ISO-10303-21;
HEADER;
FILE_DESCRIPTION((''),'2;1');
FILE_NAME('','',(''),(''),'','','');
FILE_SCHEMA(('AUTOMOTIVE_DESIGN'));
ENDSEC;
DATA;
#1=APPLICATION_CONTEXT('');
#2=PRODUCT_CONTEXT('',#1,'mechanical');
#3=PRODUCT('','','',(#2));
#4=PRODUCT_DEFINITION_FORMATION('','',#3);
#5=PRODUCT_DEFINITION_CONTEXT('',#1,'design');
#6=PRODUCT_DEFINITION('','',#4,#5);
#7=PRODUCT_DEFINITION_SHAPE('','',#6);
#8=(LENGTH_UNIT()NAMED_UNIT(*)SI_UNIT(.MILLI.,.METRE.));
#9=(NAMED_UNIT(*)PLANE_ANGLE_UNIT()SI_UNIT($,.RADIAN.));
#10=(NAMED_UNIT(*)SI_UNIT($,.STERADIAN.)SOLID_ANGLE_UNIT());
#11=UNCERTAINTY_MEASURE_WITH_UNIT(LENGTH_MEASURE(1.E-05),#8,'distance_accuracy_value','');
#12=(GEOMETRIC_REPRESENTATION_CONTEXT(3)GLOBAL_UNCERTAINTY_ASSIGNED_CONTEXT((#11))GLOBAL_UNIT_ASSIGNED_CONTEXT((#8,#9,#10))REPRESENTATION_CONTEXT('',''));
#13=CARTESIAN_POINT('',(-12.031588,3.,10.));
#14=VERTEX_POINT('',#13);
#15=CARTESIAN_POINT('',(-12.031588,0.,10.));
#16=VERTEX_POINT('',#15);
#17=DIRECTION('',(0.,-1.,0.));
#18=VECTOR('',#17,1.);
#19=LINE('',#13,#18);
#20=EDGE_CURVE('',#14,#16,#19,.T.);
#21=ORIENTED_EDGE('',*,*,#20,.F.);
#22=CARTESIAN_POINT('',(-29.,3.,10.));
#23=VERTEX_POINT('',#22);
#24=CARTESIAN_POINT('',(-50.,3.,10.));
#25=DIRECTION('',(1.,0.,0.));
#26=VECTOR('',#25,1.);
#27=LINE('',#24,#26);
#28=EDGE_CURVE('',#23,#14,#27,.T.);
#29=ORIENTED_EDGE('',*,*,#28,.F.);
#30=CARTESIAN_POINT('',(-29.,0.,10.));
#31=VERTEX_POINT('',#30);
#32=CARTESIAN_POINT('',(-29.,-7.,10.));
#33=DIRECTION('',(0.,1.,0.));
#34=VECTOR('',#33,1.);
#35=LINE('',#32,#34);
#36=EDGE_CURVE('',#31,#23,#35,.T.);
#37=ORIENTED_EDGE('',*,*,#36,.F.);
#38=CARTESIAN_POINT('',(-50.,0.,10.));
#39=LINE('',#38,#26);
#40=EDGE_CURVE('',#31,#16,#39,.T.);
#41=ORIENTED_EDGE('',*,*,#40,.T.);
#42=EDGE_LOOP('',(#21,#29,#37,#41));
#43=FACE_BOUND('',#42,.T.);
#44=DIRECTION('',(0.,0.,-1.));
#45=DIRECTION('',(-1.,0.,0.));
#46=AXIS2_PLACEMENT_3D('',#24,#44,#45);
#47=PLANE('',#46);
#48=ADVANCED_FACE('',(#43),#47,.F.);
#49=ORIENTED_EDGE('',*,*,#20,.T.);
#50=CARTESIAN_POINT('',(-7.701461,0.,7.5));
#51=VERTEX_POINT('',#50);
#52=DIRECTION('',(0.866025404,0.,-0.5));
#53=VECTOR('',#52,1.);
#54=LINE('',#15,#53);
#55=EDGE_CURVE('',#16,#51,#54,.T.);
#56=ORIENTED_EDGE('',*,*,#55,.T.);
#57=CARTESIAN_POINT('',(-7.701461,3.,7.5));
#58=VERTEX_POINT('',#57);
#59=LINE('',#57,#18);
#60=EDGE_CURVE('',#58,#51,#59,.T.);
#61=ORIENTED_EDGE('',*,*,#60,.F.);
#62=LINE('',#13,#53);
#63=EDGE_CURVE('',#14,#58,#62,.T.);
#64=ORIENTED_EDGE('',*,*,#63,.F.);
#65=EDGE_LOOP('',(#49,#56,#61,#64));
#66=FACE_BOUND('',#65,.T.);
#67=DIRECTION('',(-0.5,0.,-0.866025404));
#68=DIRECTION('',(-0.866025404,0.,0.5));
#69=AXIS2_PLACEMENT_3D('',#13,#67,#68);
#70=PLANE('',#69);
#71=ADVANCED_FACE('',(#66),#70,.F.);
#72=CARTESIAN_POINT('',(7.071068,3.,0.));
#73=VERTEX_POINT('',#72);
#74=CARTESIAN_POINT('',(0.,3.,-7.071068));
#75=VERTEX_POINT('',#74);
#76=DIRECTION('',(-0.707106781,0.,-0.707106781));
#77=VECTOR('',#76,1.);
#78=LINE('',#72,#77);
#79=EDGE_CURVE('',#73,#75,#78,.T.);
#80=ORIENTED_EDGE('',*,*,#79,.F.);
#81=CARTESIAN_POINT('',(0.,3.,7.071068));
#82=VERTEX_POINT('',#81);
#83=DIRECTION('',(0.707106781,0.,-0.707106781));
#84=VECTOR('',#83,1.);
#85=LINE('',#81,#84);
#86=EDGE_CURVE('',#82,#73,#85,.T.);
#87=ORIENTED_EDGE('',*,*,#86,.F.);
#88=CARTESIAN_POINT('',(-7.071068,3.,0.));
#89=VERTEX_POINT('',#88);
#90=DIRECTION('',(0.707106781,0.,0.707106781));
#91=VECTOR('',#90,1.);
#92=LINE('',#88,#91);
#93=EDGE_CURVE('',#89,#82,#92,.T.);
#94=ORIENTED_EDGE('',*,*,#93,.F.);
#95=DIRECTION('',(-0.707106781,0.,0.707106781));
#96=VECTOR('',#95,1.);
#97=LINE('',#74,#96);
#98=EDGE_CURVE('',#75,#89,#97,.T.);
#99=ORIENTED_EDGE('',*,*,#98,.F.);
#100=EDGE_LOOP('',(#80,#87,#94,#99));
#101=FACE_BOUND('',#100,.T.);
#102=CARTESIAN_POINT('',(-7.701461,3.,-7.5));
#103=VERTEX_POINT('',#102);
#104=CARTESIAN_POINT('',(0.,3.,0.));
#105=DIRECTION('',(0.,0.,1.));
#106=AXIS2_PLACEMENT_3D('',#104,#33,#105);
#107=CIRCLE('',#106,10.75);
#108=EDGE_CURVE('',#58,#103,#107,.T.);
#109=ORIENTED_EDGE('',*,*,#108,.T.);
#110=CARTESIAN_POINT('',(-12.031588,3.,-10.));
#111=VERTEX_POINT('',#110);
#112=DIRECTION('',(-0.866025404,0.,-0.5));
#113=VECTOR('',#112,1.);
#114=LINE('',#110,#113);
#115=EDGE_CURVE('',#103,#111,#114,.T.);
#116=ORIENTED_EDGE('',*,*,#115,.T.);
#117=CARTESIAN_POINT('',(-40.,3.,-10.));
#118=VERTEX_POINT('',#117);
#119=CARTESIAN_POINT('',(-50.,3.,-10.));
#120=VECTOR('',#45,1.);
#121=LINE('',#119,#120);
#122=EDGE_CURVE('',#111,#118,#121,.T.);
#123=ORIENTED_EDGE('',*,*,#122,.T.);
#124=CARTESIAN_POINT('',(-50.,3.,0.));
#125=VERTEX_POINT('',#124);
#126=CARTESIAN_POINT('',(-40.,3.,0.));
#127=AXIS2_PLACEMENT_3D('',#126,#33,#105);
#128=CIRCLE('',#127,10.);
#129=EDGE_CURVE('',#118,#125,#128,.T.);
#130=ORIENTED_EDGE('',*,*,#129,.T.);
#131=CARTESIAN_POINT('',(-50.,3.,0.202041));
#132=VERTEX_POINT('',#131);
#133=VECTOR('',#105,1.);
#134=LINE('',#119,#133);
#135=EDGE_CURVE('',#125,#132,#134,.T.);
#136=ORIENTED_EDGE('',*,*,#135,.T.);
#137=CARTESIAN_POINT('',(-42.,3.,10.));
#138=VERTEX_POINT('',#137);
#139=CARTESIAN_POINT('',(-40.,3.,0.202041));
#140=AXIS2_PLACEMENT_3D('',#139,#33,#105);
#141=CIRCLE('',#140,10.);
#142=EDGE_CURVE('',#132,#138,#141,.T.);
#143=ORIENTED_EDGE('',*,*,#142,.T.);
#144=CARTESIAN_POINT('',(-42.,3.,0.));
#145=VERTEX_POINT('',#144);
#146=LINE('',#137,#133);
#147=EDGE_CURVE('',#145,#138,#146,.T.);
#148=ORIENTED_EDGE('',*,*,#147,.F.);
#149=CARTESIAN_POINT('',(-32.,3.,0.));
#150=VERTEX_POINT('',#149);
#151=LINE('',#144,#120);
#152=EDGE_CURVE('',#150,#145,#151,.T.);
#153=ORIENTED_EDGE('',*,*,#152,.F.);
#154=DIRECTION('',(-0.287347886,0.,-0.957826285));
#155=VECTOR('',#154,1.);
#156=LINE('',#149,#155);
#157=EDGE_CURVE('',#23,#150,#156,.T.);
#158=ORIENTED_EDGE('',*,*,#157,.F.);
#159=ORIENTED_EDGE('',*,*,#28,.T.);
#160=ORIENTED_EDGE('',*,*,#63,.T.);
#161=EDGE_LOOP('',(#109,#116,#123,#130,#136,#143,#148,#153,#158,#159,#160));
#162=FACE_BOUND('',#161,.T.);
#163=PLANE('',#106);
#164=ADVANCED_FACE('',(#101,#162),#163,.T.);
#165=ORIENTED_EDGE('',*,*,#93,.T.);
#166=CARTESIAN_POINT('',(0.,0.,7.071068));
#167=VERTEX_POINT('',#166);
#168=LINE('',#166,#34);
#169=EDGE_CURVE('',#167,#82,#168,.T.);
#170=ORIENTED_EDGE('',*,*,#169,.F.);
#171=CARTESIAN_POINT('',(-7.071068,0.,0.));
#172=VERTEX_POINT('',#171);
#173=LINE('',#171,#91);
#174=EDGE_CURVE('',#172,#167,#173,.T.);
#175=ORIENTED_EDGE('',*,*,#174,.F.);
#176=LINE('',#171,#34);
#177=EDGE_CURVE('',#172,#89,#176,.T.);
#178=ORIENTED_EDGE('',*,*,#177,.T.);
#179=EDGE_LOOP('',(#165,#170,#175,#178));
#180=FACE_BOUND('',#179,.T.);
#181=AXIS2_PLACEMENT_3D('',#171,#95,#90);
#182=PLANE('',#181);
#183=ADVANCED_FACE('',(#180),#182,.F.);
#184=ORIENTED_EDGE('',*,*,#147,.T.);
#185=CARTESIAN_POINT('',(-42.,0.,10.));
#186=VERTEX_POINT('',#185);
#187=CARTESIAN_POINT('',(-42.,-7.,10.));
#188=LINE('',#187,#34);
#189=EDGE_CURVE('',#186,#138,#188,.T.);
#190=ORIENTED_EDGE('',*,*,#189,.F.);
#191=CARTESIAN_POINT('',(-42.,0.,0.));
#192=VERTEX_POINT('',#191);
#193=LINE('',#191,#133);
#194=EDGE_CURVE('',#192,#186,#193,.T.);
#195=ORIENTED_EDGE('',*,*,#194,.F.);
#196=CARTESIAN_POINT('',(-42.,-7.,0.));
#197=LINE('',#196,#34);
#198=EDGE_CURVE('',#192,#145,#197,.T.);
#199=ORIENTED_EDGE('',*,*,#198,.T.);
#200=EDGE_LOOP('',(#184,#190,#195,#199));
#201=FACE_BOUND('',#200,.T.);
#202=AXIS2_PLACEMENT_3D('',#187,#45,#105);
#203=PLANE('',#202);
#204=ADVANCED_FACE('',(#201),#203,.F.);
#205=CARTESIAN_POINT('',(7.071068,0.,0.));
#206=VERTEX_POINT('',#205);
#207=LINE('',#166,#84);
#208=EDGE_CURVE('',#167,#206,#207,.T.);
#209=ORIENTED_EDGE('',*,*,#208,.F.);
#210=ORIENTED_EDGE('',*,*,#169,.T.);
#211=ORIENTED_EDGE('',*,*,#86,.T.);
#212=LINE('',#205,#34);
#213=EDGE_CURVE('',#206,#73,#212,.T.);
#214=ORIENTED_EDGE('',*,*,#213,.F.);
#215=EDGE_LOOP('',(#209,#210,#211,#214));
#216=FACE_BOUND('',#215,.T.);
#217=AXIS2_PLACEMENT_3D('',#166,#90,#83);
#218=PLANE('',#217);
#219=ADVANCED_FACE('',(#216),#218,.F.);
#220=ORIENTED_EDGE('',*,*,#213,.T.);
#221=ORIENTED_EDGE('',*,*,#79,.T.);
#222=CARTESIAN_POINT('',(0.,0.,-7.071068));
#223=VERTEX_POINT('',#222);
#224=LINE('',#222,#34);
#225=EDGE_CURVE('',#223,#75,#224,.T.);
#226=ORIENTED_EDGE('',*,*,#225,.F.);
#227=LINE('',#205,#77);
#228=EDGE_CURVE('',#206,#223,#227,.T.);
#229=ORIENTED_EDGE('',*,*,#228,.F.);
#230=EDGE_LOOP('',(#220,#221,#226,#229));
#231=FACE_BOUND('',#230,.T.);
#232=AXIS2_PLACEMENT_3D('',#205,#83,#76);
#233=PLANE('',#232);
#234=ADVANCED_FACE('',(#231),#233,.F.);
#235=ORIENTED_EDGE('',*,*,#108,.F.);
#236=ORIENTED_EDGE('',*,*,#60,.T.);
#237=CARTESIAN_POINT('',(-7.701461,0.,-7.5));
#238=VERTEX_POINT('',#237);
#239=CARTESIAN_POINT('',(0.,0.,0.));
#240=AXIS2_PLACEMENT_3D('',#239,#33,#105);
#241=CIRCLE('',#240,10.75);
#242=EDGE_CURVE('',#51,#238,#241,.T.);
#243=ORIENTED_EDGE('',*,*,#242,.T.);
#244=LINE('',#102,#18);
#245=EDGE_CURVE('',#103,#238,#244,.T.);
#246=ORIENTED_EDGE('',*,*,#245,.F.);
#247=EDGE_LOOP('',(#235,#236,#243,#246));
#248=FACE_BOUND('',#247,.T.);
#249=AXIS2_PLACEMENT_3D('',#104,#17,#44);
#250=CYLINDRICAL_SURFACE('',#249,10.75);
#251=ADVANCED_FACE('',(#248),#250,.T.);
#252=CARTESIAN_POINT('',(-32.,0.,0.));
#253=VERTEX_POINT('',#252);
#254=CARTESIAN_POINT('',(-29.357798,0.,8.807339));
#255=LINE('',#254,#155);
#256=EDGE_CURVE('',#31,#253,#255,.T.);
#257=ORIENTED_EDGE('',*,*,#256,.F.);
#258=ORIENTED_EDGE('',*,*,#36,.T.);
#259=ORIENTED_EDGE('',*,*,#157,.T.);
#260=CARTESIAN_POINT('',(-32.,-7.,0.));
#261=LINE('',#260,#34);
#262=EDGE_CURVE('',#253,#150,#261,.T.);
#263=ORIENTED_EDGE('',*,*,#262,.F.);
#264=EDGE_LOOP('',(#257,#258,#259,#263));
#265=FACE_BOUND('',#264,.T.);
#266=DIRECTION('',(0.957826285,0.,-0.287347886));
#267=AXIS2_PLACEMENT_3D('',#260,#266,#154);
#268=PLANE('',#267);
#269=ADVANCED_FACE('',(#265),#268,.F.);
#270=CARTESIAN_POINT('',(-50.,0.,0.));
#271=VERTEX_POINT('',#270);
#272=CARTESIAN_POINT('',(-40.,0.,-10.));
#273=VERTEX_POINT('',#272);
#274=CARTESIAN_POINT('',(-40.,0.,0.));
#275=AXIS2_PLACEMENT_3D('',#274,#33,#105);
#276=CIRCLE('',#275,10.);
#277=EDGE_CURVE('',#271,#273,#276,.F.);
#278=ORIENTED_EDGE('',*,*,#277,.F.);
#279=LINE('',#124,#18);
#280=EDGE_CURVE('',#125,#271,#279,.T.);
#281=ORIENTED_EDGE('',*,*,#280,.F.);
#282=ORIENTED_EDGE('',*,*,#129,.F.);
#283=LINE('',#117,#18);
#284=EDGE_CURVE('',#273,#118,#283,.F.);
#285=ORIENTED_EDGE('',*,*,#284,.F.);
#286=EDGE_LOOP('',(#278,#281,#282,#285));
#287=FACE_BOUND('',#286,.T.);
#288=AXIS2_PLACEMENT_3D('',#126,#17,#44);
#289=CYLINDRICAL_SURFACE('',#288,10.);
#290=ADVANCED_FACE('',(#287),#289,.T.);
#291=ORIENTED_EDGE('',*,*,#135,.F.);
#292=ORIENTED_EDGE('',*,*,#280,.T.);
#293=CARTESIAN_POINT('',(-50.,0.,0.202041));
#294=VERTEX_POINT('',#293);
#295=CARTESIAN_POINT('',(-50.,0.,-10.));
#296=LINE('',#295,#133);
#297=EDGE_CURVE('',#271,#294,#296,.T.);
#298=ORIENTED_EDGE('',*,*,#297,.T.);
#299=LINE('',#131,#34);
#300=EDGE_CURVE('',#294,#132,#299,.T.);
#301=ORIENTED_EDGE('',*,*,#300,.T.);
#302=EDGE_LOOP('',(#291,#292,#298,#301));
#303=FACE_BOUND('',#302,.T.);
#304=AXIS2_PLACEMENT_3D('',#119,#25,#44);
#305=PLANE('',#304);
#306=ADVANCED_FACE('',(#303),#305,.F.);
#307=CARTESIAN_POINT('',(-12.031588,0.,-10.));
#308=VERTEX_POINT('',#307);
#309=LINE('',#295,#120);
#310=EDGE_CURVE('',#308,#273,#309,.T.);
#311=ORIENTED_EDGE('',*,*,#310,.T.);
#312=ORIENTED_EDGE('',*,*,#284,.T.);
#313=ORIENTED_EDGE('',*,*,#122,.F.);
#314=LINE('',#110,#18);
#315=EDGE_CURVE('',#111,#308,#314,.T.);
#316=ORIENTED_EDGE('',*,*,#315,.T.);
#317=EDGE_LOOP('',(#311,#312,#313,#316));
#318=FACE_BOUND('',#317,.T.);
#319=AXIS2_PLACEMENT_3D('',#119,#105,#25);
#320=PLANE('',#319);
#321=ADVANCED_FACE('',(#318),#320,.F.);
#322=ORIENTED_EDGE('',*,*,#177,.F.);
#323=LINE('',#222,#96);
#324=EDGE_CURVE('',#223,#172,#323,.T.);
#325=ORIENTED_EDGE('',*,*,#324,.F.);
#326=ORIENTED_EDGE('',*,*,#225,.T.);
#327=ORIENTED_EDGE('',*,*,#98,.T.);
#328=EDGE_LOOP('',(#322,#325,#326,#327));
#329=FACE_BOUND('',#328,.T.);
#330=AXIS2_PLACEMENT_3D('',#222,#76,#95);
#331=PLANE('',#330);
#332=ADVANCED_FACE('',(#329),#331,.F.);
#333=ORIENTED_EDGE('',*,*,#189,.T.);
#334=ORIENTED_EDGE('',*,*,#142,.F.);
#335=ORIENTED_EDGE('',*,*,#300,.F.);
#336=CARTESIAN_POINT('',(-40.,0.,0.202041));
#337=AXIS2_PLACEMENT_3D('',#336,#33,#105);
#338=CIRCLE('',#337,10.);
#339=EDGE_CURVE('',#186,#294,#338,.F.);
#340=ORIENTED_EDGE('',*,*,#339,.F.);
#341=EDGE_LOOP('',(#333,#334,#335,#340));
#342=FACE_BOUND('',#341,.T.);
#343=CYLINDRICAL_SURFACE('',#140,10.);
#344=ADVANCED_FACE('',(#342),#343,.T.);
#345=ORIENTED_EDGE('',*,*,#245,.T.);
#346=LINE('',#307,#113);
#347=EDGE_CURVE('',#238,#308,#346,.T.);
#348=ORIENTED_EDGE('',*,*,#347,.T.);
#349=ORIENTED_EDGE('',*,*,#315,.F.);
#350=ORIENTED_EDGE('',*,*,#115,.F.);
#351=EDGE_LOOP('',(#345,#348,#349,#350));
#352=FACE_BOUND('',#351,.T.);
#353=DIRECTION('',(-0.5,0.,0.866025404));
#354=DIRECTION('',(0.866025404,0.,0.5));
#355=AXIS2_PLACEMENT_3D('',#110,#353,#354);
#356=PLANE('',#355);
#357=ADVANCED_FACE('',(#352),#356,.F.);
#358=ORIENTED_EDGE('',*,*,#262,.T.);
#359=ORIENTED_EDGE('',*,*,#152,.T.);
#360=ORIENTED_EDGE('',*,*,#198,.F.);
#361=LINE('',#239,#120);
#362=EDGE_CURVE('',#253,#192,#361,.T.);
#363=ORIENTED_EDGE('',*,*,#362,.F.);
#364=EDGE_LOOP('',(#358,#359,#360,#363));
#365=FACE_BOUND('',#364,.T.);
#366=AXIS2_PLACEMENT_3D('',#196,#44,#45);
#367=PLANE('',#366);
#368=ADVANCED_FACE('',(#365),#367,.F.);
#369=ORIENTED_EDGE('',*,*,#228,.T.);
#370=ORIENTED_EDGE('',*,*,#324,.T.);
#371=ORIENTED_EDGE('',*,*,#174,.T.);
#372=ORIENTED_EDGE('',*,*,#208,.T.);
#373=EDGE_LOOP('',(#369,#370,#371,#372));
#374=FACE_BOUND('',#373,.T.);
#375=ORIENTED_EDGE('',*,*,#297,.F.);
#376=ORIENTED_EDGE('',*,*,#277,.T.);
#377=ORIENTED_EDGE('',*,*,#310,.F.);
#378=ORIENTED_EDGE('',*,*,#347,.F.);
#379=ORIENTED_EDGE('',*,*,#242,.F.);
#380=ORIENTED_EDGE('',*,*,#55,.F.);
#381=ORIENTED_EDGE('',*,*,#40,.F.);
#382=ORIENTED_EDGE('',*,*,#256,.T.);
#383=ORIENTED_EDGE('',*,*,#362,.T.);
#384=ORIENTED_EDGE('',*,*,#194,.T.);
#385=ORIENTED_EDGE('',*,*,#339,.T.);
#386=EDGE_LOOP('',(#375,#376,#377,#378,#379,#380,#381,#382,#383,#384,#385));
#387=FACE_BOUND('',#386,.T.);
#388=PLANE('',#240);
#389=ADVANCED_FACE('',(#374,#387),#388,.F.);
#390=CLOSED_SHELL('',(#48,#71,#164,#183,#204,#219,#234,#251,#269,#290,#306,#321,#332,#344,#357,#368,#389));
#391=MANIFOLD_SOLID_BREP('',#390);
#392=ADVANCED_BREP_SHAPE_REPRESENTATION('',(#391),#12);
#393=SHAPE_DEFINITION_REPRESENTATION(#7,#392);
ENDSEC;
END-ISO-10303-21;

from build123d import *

# Parameters (mm, degrees)
EXTRUDE_1_DEPTH     = 3
CUT_EXTRUDE_1_DEPTH = 52.230484089
CUT_EXTRUDE_3_DEPTH = 10
FILLET_1_R          = 10


with BuildPart() as part:
    # 草图2 → 凸台-拉伸1 (new body)
    with BuildSketch(Plane(origin=(0, 0, 0), x_dir=(1, 0, 0), z_dir=(0, 1, 0))):
        with BuildLine():
            Line((-12.031587919, -10), (-7.7014609, -7.5))
            ThreePointArc((-7.7014609, -7.5), (10.75, 0), (-7.7014609, 7.5))
            Line((-7.7014609, 7.5), (-12.031587919, 10))
            Line((-12.031587919, 10), (-50, 10))
            Line((-50, 10), (-50, -10))
            Line((-50, -10), (-12.031587919, -10))
        make_face()
    extrude(amount=EXTRUDE_1_DEPTH)

    # 草图3 → 切除-拉伸1 (cut, through all)
    with BuildSketch(Plane(origin=(0, 3, 0), x_dir=(1, 0, 0), z_dir=(0, 1, 0))):
        Polygon((0, 7.071067812), (-7.071067812, 0), (0, -7.071067812), (7.071067812, 0), align=None)
    extrude(amount=-CUT_EXTRUDE_1_DEPTH, mode=Mode.SUBTRACT)

    # 草图5 → 切除-拉伸3 (cut)
    with BuildSketch(Plane(origin=(0, 3, 0), x_dir=(1, 0, 0), z_dir=(0, 1, 0))):
        Polygon((-42, -10), (-42, 0), (-32, 0), (-29, -10), align=None)
    extrude(amount=-CUT_EXTRUDE_3_DEPTH, mode=Mode.SUBTRACT)

    # 圆角1
    # the kernel refuses this fillet: 10 mm, written as the material it takes off along each edge
    with BuildSketch(Plane(origin=(-50, -25, -10), x_dir=(0, 0, 1), z_dir=(0, 1, 0))) as fillet_1_piece_1:
        with BuildLine():
            CenterArc((FILLET_1_R, FILLET_1_R), FILLET_1_R, 180, 90)
            Line((0, FILLET_1_R), (-FILLET_1_R * 0.02, FILLET_1_R))
            Line((-FILLET_1_R * 0.02, FILLET_1_R), (-FILLET_1_R * 0.02, -FILLET_1_R * 0.02))
            Line((-FILLET_1_R * 0.02, -FILLET_1_R * 0.02), (FILLET_1_R, -FILLET_1_R * 0.02))
            Line((FILLET_1_R, -FILLET_1_R * 0.02), (FILLET_1_R, 0))
        make_face()
    extrude(amount=53, mode=Mode.SUBTRACT)
    with BuildSketch(Plane(origin=(-50, -24.494897428, 10), x_dir=(1, 0, 0), z_dir=(0, 1, 0))) as fillet_1_piece_2:
        with BuildLine():
            CenterArc((10, 9.797958971), FILLET_1_R, 180, 78.463040967)
            Line((0, 9.797958971), (-0.2, 9.797958971))
            Line((-0.2, 9.797958971), (-0.2, 0))
            Line((-0.2, 0), (0, -0.2))
            ThreePointArc((0, -0.2), (4, -0.2), (7.96, -0.195959179))
            Line((7.96, -0.195959179), (8, 0))
        make_face()
    extrude(amount=51.989794856, mode=Mode.SUBTRACT)


solid = part.part
